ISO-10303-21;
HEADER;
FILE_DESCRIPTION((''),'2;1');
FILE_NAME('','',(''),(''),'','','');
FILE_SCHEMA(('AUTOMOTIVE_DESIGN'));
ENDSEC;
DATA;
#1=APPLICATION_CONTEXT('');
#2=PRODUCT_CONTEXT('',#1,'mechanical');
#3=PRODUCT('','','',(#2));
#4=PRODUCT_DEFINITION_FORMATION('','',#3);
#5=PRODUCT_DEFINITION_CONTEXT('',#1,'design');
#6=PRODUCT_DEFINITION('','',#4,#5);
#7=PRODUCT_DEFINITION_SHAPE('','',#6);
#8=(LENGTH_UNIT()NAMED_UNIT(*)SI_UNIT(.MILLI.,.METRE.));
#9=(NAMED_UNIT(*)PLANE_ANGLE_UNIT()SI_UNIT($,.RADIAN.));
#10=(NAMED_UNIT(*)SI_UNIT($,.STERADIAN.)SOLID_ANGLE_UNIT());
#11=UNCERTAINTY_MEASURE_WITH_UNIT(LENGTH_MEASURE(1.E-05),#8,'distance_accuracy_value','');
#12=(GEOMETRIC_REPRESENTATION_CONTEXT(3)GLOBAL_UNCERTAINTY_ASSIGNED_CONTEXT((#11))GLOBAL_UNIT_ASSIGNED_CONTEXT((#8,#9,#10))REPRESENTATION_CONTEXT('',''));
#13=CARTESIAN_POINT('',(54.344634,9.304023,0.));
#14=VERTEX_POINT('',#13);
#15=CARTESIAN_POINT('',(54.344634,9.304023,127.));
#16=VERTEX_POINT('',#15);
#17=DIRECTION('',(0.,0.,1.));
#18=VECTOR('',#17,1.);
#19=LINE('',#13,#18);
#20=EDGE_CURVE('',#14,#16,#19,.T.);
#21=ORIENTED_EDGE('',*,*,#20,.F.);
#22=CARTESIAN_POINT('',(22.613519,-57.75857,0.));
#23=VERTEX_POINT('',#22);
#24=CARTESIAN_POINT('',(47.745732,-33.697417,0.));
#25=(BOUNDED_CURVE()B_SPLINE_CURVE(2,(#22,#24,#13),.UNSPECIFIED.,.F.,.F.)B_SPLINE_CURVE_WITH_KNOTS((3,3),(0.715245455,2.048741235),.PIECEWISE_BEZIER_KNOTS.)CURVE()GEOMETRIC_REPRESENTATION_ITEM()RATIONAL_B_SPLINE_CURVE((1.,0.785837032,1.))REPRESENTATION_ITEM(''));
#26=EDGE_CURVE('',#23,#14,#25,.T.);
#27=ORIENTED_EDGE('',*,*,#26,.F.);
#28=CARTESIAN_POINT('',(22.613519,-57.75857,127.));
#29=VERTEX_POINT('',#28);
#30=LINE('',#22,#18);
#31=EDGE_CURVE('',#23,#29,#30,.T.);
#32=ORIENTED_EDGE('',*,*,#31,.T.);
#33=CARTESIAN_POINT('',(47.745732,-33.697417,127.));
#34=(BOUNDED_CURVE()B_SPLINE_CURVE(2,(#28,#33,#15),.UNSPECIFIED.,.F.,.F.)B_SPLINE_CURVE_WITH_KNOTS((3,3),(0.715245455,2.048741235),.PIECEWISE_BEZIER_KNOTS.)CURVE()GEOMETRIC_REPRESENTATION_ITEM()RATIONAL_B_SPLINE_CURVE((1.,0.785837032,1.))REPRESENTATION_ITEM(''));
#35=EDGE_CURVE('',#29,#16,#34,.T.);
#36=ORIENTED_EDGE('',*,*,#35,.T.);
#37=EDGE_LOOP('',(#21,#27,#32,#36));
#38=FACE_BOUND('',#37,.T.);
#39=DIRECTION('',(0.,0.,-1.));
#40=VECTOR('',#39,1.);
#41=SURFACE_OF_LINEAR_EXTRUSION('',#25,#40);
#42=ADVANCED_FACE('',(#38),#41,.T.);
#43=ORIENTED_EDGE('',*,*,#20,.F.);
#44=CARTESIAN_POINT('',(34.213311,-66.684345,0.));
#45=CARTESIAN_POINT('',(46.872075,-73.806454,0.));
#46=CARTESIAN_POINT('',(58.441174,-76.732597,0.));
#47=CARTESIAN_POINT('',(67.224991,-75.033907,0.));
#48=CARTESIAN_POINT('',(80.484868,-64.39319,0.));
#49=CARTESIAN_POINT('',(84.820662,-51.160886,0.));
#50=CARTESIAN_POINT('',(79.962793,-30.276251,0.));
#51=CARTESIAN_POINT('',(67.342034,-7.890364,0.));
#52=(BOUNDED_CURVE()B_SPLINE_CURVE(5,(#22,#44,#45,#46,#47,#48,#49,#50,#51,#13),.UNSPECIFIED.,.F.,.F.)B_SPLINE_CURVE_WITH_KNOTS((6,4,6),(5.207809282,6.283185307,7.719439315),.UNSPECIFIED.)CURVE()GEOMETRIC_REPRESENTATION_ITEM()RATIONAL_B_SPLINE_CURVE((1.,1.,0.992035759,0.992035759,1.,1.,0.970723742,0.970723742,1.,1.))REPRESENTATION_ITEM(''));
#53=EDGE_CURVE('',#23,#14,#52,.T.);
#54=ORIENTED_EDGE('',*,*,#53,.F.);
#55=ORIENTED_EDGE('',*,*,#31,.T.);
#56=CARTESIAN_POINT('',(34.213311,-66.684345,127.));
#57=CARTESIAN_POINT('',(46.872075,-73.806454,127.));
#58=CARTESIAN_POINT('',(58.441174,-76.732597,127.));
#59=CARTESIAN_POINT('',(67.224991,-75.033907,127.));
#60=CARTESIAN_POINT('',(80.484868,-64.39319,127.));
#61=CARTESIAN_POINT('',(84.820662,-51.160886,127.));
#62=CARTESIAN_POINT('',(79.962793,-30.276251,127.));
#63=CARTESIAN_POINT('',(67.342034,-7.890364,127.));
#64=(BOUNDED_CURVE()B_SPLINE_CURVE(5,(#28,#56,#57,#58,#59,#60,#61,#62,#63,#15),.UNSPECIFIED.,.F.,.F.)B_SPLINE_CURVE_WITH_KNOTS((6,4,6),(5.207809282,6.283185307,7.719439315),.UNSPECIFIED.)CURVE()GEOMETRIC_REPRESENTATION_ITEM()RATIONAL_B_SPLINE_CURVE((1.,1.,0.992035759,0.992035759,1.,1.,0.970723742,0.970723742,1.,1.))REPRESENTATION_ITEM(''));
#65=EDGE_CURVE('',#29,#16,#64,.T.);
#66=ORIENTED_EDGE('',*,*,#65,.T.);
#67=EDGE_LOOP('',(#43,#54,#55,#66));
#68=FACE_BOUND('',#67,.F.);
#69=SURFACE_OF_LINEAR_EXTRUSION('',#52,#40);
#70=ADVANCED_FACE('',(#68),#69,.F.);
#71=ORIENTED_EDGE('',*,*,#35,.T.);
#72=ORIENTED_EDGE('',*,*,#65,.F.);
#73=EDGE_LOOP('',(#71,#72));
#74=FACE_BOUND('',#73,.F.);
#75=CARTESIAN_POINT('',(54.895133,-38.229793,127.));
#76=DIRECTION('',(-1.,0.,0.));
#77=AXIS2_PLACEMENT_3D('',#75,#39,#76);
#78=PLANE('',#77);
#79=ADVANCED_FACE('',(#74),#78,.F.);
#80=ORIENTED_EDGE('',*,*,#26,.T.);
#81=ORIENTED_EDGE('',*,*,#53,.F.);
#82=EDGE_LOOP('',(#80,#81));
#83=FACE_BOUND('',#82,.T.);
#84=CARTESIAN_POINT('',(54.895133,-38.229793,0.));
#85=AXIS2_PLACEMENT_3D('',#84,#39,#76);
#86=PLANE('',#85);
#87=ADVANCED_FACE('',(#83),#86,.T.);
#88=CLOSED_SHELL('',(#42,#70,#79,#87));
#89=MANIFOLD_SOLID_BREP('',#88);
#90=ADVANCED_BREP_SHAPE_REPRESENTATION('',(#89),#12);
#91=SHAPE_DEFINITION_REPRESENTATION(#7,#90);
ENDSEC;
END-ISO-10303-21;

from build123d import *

# Parameters (mm, degrees)
F1_DEPTH = 127


with BuildPart() as f1:
    # F0 (on Top) → F1 (new body)
    with BuildSketch(Plane.XY):
        with BuildLine():
            add(Edge.make_bspline(
                [(22.6135193944, -57.7585702957), (47.7457317539, -33.6974171986), (54.3446338515, 9.3040225624)],
                knots=[0.7152454552, 0.7152454552, 0.7152454552, 2.048741235, 2.048741235, 2.048741235], degree=2, weights=[1, 0.7858370322, 1]))
            add(Edge.make_bspline(
                [(22.6135193944, -57.7585702957), (56.3772224768, -83.7389682514), (72.9023218155, -70.4779922962)],
                knots=[5.2078092816, 5.2078092816, 5.2078092816, 6.2831853072, 6.2831853072, 6.2831853072], degree=2, weights=[1, 0.8588950638, 1]))
            add(Edge.make_bspline(
                [(72.9023218155, -70.4779922962), (98.8890877871, -49.6242672057), (54.3446338515, 9.3040225624)],
                knots=[0, 0, 0, 1.5065215751, 1.5065215751, 1.5065215751], degree=2, weights=[1, 0.7294623037, 1]))
        make_face()
    extrude(amount=F1_DEPTH)


solid = f1.part
